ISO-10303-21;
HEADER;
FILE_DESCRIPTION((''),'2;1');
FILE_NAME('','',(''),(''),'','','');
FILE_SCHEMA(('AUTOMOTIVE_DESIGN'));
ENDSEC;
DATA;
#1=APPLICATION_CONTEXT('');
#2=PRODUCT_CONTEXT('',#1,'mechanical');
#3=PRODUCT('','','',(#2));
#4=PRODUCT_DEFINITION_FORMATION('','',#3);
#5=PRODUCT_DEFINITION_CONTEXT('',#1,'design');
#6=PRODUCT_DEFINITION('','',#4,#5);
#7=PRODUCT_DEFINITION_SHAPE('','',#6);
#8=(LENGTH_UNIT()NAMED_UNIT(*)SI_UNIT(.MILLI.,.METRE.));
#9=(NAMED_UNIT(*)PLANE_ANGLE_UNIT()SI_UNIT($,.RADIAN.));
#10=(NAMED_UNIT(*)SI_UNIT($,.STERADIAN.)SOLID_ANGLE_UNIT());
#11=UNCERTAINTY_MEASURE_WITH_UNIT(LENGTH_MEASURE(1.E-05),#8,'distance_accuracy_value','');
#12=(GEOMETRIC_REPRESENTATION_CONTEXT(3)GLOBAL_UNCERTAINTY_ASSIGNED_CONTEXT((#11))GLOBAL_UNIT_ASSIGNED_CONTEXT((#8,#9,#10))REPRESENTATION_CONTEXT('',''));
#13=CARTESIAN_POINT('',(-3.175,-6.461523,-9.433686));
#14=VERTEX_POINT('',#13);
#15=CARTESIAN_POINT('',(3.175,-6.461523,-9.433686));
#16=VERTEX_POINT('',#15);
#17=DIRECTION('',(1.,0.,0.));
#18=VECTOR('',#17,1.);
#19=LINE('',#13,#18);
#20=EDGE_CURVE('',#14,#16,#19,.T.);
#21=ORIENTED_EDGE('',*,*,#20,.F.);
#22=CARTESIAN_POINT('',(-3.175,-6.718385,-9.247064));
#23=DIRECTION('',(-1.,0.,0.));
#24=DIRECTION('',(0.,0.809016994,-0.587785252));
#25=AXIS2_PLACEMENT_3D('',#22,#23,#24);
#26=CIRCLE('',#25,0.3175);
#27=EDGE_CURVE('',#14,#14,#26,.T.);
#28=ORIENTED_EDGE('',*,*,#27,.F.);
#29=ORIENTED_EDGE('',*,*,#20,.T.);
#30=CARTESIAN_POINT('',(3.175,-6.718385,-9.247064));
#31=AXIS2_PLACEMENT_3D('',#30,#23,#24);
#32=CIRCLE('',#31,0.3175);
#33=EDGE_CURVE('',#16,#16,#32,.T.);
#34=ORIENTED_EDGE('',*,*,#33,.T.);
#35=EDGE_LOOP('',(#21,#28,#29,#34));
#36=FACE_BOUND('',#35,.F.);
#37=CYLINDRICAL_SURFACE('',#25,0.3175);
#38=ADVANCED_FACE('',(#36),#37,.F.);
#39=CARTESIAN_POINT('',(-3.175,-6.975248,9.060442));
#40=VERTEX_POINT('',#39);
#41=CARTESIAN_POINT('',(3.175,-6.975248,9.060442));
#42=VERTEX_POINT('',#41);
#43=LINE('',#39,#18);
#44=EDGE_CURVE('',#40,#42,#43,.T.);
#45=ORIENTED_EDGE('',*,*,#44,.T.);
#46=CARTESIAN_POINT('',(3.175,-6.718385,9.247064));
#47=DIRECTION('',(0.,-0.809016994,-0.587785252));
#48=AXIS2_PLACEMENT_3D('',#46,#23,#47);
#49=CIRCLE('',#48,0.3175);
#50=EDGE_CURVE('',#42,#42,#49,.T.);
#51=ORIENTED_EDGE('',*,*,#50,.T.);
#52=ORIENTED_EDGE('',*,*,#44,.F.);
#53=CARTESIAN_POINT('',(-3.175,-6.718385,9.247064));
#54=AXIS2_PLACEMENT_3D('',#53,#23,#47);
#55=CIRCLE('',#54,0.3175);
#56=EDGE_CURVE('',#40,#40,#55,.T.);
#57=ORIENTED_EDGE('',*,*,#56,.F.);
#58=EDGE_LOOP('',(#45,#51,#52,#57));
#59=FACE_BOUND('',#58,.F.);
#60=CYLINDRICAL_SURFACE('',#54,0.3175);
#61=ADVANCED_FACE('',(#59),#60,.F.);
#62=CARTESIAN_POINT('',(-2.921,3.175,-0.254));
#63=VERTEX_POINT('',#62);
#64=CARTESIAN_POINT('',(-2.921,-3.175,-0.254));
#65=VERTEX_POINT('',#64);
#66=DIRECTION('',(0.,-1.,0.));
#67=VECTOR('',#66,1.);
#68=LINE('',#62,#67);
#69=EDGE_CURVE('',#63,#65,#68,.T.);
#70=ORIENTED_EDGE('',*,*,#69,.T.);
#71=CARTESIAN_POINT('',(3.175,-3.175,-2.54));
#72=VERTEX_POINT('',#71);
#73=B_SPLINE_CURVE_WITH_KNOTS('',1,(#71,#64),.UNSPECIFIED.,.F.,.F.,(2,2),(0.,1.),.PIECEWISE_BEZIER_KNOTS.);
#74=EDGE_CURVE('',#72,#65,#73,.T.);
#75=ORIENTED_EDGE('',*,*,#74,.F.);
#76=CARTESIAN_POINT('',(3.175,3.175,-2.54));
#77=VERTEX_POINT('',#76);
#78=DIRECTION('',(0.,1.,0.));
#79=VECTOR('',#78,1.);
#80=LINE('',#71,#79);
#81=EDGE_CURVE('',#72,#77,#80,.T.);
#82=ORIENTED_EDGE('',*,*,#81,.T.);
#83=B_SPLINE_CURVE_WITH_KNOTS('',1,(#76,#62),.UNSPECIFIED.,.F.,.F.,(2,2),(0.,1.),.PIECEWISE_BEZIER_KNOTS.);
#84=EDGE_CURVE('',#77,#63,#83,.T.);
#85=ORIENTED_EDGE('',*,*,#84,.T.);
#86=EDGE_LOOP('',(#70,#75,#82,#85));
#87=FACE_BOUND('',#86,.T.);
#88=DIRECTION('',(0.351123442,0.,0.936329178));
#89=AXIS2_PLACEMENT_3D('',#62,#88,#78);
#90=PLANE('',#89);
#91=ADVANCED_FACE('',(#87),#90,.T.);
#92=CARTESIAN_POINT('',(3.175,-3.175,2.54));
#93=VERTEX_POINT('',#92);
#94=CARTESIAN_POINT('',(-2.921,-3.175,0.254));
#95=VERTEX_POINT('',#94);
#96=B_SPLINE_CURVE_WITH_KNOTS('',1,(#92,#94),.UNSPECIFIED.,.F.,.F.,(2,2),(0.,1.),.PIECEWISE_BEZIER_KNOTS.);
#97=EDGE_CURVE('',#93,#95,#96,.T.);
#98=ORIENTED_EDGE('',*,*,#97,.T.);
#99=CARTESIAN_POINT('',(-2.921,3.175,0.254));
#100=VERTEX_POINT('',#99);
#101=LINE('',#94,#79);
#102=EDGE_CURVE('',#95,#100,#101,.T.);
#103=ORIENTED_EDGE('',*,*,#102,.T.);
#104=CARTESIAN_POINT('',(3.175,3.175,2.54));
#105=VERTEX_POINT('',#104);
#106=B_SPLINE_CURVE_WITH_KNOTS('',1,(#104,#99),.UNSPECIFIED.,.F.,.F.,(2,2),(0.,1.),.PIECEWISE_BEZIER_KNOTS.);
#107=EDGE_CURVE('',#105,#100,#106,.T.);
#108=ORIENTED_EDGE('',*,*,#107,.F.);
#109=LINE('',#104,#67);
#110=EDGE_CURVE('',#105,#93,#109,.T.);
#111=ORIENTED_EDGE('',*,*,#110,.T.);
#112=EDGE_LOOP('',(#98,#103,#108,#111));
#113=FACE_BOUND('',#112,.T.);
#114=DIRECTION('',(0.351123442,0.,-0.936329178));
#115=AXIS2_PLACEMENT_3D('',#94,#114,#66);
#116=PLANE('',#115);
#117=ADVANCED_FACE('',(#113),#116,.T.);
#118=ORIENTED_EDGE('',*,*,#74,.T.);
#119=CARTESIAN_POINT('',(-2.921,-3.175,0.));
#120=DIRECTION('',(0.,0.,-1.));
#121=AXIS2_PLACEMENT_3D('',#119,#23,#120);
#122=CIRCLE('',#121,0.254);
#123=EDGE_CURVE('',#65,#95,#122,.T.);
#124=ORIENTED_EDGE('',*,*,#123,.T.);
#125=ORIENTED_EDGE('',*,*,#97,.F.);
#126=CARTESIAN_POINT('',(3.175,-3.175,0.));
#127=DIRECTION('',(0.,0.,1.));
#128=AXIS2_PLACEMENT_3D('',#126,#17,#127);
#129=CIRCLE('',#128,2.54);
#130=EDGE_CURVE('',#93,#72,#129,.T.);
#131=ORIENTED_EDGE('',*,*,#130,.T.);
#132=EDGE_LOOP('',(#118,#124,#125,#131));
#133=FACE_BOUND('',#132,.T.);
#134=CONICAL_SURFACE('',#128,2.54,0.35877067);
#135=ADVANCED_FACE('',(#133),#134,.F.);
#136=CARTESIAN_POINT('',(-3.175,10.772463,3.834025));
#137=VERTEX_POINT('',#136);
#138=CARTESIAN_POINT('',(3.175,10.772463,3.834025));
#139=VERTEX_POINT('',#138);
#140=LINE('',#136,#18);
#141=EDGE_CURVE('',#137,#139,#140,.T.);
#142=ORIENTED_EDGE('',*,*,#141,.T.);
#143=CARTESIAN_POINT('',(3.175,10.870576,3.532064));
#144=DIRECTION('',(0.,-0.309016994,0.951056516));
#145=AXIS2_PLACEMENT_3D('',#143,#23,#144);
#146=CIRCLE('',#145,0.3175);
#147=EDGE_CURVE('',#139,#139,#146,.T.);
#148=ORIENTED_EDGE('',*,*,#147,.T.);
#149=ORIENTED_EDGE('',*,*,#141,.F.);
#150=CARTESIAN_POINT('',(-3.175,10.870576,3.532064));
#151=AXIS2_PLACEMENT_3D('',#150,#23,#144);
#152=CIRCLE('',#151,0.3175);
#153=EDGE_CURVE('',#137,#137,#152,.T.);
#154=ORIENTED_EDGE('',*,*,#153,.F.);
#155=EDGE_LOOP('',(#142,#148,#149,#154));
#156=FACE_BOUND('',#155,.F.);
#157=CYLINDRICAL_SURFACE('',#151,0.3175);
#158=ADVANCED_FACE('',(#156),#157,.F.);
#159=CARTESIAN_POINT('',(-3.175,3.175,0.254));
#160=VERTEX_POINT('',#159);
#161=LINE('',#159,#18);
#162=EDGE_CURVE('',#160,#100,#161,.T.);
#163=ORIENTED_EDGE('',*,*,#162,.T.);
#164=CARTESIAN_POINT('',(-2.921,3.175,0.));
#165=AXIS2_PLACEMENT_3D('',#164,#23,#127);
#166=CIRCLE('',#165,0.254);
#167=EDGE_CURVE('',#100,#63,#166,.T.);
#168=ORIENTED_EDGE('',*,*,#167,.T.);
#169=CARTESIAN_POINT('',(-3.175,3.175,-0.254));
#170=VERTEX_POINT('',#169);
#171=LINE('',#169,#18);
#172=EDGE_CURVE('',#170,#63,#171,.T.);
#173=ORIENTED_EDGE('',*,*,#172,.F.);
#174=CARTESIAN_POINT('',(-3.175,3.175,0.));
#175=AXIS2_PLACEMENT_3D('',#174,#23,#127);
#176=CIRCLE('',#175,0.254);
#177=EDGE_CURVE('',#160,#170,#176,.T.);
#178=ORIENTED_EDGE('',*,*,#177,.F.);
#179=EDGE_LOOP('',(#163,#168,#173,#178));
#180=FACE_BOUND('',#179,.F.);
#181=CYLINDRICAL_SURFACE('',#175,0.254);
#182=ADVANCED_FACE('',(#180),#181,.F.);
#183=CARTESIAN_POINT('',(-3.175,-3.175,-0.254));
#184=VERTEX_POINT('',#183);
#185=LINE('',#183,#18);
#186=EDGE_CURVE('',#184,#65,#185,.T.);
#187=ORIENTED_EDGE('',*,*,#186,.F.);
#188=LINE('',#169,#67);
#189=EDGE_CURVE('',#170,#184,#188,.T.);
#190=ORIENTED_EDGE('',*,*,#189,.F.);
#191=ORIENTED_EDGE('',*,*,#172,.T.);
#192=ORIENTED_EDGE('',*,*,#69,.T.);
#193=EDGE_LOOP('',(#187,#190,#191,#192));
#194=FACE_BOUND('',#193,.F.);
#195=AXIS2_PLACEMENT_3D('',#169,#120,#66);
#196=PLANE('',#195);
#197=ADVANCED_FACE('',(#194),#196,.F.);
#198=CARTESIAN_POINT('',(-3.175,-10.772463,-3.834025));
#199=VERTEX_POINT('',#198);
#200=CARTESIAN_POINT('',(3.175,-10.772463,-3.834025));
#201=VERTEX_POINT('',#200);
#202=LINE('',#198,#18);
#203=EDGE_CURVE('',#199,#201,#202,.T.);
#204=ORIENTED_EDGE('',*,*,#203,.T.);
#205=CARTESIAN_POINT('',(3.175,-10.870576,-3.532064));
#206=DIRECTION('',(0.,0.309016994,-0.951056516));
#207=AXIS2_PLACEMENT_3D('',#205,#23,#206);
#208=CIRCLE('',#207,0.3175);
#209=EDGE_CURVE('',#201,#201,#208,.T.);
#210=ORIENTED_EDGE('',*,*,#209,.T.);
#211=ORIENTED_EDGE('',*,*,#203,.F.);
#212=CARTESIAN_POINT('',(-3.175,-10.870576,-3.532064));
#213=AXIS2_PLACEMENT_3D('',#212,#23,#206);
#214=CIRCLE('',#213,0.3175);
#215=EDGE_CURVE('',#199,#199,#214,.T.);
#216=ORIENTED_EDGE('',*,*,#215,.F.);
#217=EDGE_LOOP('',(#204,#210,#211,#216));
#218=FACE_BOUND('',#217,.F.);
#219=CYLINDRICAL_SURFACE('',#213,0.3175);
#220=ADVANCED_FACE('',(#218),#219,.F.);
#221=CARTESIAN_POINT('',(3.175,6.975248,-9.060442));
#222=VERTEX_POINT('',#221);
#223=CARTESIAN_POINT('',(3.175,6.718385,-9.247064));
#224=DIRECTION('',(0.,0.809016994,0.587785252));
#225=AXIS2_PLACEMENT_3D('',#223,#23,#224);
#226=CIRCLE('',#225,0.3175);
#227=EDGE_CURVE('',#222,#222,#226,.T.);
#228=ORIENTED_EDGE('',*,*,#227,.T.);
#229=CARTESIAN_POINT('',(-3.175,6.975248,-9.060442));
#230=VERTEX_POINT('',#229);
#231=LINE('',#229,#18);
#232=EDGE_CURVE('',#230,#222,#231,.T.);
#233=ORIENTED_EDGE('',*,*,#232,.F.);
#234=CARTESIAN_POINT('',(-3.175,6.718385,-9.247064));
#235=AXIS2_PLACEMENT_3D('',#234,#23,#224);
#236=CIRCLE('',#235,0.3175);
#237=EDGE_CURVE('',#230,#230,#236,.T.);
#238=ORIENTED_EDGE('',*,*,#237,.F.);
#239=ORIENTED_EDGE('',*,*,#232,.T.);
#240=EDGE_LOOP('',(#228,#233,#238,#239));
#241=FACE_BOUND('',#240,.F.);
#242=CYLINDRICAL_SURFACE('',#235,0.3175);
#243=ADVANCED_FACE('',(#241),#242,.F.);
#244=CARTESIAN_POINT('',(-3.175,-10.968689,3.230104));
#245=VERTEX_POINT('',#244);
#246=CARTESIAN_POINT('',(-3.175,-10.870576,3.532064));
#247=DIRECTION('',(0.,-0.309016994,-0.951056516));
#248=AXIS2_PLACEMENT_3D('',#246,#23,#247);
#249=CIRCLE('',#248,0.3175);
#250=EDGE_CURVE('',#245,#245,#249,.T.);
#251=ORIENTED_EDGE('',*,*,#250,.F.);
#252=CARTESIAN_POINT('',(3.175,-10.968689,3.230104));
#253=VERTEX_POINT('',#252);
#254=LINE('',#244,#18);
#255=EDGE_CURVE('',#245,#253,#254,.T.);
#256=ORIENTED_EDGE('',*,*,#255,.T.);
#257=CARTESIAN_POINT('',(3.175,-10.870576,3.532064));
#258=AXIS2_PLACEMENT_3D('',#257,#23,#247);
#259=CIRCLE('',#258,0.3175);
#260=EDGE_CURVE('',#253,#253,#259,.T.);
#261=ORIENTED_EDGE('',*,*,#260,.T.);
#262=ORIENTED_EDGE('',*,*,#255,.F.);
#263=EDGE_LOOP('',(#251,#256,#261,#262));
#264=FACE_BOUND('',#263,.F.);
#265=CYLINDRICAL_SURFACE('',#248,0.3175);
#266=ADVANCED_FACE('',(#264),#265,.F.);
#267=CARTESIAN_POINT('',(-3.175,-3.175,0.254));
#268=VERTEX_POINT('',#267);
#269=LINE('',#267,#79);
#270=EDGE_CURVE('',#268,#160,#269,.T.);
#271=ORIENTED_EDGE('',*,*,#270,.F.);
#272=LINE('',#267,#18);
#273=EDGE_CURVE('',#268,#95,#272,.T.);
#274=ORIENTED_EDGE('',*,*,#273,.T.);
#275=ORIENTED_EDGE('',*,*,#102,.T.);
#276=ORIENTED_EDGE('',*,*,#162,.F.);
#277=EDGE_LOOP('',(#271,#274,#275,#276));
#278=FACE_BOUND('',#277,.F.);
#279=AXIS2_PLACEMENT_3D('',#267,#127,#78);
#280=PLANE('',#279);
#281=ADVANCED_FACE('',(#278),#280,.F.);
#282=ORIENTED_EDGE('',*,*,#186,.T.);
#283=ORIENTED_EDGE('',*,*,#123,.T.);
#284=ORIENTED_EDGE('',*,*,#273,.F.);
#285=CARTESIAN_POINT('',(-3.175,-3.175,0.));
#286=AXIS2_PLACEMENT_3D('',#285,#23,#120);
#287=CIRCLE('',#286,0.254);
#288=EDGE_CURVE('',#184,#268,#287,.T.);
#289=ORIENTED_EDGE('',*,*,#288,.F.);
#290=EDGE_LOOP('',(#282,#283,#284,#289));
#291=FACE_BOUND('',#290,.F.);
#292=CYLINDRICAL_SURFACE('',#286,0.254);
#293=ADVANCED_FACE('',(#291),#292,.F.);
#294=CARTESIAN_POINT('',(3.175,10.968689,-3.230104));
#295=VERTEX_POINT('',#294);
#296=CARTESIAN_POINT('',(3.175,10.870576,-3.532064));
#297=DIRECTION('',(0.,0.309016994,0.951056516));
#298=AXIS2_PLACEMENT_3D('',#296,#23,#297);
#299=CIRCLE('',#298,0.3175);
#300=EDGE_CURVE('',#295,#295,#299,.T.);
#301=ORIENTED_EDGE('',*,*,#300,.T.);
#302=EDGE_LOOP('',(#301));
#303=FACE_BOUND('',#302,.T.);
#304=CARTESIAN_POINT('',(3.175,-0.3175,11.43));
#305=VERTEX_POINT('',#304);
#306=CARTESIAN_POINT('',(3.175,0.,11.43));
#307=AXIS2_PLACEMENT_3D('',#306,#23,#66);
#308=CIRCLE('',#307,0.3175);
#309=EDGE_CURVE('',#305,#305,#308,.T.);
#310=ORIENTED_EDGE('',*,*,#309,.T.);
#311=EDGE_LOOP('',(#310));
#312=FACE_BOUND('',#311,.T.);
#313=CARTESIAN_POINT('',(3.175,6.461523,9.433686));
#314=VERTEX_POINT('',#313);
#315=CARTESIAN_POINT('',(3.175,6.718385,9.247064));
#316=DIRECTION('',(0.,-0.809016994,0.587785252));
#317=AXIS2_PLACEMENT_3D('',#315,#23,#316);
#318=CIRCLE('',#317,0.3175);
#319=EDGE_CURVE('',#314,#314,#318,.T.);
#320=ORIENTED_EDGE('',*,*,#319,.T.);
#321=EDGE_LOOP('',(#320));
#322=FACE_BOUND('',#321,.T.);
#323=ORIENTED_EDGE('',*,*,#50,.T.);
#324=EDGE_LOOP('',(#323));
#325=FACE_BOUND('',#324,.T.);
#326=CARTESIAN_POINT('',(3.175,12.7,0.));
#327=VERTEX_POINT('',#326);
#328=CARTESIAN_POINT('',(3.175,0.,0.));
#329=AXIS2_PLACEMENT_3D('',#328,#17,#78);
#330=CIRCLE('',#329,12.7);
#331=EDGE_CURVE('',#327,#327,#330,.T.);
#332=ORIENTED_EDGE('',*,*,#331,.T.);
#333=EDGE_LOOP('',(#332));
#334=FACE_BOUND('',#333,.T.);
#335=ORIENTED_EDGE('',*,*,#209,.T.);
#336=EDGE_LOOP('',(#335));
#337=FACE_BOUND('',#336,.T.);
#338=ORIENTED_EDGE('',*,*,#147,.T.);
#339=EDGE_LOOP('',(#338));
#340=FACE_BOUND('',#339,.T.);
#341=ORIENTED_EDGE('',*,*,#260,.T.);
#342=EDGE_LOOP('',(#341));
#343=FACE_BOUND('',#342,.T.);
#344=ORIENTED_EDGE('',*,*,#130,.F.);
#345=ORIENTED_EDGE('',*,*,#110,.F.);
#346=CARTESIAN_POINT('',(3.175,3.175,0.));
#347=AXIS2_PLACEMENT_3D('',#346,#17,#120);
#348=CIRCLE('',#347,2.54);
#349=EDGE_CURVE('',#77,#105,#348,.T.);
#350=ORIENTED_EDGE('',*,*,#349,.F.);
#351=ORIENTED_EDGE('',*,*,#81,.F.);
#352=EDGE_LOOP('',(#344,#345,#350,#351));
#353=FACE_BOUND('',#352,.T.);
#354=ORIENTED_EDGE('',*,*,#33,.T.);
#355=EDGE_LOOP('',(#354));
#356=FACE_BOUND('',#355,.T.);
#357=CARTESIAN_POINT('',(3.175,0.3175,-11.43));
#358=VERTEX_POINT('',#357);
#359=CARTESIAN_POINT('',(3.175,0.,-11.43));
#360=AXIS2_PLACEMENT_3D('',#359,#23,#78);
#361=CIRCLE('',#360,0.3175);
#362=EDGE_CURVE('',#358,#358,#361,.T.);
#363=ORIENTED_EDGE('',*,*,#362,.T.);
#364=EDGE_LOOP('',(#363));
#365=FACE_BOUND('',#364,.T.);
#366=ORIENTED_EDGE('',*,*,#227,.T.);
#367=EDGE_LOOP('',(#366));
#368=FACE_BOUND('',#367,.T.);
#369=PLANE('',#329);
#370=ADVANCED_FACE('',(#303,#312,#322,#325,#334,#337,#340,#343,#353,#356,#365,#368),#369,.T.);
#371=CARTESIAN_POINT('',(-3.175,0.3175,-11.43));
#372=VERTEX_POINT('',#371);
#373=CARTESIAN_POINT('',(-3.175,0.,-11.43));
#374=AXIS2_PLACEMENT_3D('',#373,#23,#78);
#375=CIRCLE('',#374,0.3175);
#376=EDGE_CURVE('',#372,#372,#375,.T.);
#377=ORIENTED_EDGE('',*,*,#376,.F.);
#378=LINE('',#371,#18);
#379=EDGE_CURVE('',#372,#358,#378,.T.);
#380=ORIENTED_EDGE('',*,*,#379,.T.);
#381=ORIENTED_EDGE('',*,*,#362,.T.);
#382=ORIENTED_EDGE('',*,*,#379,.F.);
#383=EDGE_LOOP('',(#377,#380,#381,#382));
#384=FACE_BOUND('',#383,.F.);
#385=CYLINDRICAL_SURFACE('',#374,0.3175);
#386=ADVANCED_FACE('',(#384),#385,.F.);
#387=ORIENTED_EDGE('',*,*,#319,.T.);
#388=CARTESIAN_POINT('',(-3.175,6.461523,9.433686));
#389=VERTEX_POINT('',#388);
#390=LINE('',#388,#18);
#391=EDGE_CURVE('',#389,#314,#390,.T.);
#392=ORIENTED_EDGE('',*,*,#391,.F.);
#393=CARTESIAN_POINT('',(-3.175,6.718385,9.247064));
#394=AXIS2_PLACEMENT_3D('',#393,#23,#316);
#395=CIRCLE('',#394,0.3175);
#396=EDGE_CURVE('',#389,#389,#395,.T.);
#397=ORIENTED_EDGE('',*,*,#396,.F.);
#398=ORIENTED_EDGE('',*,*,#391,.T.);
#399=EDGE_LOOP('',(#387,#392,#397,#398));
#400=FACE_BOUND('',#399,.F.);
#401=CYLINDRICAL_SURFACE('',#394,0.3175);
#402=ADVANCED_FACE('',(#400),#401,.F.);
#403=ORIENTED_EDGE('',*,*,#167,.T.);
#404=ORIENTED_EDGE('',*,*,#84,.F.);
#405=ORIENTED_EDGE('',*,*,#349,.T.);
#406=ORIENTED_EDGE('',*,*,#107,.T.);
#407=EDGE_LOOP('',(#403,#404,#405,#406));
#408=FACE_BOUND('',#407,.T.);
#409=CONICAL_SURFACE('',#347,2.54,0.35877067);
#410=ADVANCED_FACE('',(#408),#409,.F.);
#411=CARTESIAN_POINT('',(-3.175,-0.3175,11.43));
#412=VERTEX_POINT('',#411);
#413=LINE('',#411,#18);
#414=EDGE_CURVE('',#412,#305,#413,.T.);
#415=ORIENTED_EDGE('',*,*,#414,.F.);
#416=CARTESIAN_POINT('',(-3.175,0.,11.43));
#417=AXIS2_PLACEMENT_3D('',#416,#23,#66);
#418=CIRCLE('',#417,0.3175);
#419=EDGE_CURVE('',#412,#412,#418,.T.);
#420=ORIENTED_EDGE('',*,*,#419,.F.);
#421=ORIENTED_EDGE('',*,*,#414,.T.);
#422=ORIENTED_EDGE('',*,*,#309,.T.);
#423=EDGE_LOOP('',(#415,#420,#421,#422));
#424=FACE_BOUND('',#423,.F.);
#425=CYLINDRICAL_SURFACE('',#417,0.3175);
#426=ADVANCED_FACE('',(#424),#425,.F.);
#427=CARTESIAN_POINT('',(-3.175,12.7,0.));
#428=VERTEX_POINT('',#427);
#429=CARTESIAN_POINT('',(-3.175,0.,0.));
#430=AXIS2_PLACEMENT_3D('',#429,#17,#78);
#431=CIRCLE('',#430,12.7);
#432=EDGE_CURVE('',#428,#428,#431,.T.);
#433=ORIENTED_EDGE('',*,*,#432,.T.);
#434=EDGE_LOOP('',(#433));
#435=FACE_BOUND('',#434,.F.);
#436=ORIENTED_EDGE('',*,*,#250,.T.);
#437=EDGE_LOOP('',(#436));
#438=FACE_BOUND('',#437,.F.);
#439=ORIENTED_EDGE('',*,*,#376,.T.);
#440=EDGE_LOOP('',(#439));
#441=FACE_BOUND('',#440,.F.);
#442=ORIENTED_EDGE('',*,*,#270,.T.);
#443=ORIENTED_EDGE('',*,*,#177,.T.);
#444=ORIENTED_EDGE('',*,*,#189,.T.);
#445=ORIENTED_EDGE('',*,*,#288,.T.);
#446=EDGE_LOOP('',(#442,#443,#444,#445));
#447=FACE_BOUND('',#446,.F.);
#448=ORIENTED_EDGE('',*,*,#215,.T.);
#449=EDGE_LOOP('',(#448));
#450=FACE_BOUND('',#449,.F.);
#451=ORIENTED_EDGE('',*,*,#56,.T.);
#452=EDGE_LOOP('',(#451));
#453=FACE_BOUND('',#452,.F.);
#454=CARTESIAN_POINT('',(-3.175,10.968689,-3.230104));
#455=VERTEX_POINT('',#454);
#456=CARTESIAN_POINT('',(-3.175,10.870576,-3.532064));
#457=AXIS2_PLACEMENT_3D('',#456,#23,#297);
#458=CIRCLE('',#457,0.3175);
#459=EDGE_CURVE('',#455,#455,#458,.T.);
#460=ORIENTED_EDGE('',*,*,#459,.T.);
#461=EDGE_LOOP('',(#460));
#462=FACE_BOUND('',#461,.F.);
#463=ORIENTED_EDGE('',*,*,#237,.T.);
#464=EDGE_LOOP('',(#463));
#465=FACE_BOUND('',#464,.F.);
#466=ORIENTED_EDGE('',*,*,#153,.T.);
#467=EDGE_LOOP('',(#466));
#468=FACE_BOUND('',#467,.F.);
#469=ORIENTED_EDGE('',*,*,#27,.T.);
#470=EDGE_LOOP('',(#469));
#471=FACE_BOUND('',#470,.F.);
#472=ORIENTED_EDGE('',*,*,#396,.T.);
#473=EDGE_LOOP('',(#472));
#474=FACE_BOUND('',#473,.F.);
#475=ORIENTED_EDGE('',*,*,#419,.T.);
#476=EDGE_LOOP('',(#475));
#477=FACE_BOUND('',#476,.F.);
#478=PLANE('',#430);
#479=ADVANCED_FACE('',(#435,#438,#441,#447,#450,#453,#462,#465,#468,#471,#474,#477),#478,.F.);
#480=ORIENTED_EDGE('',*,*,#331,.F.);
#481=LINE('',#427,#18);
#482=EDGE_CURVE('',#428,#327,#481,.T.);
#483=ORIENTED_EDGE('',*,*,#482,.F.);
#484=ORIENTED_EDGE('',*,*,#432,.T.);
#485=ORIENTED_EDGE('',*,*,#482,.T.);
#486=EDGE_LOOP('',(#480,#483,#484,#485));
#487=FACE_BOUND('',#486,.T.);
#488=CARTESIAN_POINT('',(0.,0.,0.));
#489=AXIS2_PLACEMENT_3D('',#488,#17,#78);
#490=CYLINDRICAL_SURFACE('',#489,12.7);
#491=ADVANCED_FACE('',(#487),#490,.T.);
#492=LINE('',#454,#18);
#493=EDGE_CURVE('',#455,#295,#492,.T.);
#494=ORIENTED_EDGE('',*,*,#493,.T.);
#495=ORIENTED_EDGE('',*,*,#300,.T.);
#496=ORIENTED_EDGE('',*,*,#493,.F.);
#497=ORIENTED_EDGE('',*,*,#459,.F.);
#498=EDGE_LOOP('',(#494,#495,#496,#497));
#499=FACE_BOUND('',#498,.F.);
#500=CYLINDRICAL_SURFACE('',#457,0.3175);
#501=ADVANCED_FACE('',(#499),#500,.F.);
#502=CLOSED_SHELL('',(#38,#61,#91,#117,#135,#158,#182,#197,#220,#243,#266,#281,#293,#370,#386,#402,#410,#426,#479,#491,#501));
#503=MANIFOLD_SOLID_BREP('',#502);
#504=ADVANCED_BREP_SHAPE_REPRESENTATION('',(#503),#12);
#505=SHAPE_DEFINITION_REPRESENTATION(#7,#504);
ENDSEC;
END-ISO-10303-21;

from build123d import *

# Parameters (mm, degrees)
F0_R            = 12.7
F1_DEPTH        = 3.175
F2_R            = 0.3175
F4_DEPTH        = 6.351
F4_COPIES_COUNT = 10
F7_DEPTH        = 0.254


# Not quite as in the source:
# - a pattern or mirror of a feature is missing from the dataset's text; its kind, count and spacing are read off the source's solid


with BuildPart() as f1:
    # F0 (on Right) → F1 (new body, symmetric)
    with BuildSketch(Plane.YZ):
        Circle(F0_R)
    extrude(amount=F1_DEPTH, both=True)

    # F2 (on face) → F4 (cut, through all)
    with BuildSketch(Plane(origin=(-3.175, 0, 0), x_dir=(0, -1, 0), z_dir=(-1, 0, 0))):
        with Locations((0, 11.43)):
            Circle(F2_R)
    f4 = extrude(amount=-F4_DEPTH, mode=Mode.SUBTRACT)

    # F4_copies: F4 ×10 about axis
    f4_copies_axis = Axis((0, 0, 0), (1, 0, 0))
    for i in range(1, F4_COPIES_COUNT):
        add(f4.rotate(f4_copies_axis, i * 360 / F4_COPIES_COUNT), mode=Mode.SUBTRACT)

    # F5 (on face) → F7 (cut)
    with BuildSketch(Plane(origin=(-3.175, 0, 0), x_dir=(0, -1, 0), z_dir=(-1, 0, 0))):
        with BuildLine():
            ThreePointArc((-3.175, 0.254), (-3.429, 0), (-3.175, -0.254))
            Line((-3.175, -0.254), (0, -0.254))
            Line((0, -0.254), (3.175, -0.254))
            ThreePointArc((3.175, -0.254), (3.429, 0), (3.175, 0.254))
            Line((3.175, 0.254), (0, 0.254))
            Line((0, 0.254), (-3.175, 0.254))
        make_face()
    extrude(amount=-F7_DEPTH, mode=Mode.SUBTRACT)

    # F6 (on face) → F9 section 0
    with BuildSketch(Plane.YZ.offset(3.175)):
        with BuildLine():
            ThreePointArc((-3.175, 2.54), (-5.715, 0), (-3.175, -2.54))
            Line((-3.175, -2.54), (0, -2.54))
            Line((0, -2.54), (3.175, -2.54))
            ThreePointArc((3.175, -2.54), (5.715, 0), (3.175, 2.54))
            Line((3.175, 2.54), (0, 2.54))
            Line((0, 2.54), (-3.175, 2.54))
        make_face()
    # F8 (on face) → F9 section 1
    with BuildSketch(Plane(origin=(-2.921, 0, 0), x_dir=(0, -1, 0), z_dir=(-1, 0, 0))):
        with BuildLine():
            ThreePointArc((-3.175, 0.254), (-3.429, 0), (-3.175, -0.254))
            Line((-3.175, -0.254), (0, -0.254))
            Line((0, -0.254), (3.175, -0.254))
            ThreePointArc((3.175, -0.254), (3.429, 0), (3.175, 0.254))
            Line((3.175, 0.254), (0, 0.254))
            Line((0, 0.254), (-3.175, 0.254))
        make_face()
    loft(mode=Mode.SUBTRACT)


solid = f1.part
